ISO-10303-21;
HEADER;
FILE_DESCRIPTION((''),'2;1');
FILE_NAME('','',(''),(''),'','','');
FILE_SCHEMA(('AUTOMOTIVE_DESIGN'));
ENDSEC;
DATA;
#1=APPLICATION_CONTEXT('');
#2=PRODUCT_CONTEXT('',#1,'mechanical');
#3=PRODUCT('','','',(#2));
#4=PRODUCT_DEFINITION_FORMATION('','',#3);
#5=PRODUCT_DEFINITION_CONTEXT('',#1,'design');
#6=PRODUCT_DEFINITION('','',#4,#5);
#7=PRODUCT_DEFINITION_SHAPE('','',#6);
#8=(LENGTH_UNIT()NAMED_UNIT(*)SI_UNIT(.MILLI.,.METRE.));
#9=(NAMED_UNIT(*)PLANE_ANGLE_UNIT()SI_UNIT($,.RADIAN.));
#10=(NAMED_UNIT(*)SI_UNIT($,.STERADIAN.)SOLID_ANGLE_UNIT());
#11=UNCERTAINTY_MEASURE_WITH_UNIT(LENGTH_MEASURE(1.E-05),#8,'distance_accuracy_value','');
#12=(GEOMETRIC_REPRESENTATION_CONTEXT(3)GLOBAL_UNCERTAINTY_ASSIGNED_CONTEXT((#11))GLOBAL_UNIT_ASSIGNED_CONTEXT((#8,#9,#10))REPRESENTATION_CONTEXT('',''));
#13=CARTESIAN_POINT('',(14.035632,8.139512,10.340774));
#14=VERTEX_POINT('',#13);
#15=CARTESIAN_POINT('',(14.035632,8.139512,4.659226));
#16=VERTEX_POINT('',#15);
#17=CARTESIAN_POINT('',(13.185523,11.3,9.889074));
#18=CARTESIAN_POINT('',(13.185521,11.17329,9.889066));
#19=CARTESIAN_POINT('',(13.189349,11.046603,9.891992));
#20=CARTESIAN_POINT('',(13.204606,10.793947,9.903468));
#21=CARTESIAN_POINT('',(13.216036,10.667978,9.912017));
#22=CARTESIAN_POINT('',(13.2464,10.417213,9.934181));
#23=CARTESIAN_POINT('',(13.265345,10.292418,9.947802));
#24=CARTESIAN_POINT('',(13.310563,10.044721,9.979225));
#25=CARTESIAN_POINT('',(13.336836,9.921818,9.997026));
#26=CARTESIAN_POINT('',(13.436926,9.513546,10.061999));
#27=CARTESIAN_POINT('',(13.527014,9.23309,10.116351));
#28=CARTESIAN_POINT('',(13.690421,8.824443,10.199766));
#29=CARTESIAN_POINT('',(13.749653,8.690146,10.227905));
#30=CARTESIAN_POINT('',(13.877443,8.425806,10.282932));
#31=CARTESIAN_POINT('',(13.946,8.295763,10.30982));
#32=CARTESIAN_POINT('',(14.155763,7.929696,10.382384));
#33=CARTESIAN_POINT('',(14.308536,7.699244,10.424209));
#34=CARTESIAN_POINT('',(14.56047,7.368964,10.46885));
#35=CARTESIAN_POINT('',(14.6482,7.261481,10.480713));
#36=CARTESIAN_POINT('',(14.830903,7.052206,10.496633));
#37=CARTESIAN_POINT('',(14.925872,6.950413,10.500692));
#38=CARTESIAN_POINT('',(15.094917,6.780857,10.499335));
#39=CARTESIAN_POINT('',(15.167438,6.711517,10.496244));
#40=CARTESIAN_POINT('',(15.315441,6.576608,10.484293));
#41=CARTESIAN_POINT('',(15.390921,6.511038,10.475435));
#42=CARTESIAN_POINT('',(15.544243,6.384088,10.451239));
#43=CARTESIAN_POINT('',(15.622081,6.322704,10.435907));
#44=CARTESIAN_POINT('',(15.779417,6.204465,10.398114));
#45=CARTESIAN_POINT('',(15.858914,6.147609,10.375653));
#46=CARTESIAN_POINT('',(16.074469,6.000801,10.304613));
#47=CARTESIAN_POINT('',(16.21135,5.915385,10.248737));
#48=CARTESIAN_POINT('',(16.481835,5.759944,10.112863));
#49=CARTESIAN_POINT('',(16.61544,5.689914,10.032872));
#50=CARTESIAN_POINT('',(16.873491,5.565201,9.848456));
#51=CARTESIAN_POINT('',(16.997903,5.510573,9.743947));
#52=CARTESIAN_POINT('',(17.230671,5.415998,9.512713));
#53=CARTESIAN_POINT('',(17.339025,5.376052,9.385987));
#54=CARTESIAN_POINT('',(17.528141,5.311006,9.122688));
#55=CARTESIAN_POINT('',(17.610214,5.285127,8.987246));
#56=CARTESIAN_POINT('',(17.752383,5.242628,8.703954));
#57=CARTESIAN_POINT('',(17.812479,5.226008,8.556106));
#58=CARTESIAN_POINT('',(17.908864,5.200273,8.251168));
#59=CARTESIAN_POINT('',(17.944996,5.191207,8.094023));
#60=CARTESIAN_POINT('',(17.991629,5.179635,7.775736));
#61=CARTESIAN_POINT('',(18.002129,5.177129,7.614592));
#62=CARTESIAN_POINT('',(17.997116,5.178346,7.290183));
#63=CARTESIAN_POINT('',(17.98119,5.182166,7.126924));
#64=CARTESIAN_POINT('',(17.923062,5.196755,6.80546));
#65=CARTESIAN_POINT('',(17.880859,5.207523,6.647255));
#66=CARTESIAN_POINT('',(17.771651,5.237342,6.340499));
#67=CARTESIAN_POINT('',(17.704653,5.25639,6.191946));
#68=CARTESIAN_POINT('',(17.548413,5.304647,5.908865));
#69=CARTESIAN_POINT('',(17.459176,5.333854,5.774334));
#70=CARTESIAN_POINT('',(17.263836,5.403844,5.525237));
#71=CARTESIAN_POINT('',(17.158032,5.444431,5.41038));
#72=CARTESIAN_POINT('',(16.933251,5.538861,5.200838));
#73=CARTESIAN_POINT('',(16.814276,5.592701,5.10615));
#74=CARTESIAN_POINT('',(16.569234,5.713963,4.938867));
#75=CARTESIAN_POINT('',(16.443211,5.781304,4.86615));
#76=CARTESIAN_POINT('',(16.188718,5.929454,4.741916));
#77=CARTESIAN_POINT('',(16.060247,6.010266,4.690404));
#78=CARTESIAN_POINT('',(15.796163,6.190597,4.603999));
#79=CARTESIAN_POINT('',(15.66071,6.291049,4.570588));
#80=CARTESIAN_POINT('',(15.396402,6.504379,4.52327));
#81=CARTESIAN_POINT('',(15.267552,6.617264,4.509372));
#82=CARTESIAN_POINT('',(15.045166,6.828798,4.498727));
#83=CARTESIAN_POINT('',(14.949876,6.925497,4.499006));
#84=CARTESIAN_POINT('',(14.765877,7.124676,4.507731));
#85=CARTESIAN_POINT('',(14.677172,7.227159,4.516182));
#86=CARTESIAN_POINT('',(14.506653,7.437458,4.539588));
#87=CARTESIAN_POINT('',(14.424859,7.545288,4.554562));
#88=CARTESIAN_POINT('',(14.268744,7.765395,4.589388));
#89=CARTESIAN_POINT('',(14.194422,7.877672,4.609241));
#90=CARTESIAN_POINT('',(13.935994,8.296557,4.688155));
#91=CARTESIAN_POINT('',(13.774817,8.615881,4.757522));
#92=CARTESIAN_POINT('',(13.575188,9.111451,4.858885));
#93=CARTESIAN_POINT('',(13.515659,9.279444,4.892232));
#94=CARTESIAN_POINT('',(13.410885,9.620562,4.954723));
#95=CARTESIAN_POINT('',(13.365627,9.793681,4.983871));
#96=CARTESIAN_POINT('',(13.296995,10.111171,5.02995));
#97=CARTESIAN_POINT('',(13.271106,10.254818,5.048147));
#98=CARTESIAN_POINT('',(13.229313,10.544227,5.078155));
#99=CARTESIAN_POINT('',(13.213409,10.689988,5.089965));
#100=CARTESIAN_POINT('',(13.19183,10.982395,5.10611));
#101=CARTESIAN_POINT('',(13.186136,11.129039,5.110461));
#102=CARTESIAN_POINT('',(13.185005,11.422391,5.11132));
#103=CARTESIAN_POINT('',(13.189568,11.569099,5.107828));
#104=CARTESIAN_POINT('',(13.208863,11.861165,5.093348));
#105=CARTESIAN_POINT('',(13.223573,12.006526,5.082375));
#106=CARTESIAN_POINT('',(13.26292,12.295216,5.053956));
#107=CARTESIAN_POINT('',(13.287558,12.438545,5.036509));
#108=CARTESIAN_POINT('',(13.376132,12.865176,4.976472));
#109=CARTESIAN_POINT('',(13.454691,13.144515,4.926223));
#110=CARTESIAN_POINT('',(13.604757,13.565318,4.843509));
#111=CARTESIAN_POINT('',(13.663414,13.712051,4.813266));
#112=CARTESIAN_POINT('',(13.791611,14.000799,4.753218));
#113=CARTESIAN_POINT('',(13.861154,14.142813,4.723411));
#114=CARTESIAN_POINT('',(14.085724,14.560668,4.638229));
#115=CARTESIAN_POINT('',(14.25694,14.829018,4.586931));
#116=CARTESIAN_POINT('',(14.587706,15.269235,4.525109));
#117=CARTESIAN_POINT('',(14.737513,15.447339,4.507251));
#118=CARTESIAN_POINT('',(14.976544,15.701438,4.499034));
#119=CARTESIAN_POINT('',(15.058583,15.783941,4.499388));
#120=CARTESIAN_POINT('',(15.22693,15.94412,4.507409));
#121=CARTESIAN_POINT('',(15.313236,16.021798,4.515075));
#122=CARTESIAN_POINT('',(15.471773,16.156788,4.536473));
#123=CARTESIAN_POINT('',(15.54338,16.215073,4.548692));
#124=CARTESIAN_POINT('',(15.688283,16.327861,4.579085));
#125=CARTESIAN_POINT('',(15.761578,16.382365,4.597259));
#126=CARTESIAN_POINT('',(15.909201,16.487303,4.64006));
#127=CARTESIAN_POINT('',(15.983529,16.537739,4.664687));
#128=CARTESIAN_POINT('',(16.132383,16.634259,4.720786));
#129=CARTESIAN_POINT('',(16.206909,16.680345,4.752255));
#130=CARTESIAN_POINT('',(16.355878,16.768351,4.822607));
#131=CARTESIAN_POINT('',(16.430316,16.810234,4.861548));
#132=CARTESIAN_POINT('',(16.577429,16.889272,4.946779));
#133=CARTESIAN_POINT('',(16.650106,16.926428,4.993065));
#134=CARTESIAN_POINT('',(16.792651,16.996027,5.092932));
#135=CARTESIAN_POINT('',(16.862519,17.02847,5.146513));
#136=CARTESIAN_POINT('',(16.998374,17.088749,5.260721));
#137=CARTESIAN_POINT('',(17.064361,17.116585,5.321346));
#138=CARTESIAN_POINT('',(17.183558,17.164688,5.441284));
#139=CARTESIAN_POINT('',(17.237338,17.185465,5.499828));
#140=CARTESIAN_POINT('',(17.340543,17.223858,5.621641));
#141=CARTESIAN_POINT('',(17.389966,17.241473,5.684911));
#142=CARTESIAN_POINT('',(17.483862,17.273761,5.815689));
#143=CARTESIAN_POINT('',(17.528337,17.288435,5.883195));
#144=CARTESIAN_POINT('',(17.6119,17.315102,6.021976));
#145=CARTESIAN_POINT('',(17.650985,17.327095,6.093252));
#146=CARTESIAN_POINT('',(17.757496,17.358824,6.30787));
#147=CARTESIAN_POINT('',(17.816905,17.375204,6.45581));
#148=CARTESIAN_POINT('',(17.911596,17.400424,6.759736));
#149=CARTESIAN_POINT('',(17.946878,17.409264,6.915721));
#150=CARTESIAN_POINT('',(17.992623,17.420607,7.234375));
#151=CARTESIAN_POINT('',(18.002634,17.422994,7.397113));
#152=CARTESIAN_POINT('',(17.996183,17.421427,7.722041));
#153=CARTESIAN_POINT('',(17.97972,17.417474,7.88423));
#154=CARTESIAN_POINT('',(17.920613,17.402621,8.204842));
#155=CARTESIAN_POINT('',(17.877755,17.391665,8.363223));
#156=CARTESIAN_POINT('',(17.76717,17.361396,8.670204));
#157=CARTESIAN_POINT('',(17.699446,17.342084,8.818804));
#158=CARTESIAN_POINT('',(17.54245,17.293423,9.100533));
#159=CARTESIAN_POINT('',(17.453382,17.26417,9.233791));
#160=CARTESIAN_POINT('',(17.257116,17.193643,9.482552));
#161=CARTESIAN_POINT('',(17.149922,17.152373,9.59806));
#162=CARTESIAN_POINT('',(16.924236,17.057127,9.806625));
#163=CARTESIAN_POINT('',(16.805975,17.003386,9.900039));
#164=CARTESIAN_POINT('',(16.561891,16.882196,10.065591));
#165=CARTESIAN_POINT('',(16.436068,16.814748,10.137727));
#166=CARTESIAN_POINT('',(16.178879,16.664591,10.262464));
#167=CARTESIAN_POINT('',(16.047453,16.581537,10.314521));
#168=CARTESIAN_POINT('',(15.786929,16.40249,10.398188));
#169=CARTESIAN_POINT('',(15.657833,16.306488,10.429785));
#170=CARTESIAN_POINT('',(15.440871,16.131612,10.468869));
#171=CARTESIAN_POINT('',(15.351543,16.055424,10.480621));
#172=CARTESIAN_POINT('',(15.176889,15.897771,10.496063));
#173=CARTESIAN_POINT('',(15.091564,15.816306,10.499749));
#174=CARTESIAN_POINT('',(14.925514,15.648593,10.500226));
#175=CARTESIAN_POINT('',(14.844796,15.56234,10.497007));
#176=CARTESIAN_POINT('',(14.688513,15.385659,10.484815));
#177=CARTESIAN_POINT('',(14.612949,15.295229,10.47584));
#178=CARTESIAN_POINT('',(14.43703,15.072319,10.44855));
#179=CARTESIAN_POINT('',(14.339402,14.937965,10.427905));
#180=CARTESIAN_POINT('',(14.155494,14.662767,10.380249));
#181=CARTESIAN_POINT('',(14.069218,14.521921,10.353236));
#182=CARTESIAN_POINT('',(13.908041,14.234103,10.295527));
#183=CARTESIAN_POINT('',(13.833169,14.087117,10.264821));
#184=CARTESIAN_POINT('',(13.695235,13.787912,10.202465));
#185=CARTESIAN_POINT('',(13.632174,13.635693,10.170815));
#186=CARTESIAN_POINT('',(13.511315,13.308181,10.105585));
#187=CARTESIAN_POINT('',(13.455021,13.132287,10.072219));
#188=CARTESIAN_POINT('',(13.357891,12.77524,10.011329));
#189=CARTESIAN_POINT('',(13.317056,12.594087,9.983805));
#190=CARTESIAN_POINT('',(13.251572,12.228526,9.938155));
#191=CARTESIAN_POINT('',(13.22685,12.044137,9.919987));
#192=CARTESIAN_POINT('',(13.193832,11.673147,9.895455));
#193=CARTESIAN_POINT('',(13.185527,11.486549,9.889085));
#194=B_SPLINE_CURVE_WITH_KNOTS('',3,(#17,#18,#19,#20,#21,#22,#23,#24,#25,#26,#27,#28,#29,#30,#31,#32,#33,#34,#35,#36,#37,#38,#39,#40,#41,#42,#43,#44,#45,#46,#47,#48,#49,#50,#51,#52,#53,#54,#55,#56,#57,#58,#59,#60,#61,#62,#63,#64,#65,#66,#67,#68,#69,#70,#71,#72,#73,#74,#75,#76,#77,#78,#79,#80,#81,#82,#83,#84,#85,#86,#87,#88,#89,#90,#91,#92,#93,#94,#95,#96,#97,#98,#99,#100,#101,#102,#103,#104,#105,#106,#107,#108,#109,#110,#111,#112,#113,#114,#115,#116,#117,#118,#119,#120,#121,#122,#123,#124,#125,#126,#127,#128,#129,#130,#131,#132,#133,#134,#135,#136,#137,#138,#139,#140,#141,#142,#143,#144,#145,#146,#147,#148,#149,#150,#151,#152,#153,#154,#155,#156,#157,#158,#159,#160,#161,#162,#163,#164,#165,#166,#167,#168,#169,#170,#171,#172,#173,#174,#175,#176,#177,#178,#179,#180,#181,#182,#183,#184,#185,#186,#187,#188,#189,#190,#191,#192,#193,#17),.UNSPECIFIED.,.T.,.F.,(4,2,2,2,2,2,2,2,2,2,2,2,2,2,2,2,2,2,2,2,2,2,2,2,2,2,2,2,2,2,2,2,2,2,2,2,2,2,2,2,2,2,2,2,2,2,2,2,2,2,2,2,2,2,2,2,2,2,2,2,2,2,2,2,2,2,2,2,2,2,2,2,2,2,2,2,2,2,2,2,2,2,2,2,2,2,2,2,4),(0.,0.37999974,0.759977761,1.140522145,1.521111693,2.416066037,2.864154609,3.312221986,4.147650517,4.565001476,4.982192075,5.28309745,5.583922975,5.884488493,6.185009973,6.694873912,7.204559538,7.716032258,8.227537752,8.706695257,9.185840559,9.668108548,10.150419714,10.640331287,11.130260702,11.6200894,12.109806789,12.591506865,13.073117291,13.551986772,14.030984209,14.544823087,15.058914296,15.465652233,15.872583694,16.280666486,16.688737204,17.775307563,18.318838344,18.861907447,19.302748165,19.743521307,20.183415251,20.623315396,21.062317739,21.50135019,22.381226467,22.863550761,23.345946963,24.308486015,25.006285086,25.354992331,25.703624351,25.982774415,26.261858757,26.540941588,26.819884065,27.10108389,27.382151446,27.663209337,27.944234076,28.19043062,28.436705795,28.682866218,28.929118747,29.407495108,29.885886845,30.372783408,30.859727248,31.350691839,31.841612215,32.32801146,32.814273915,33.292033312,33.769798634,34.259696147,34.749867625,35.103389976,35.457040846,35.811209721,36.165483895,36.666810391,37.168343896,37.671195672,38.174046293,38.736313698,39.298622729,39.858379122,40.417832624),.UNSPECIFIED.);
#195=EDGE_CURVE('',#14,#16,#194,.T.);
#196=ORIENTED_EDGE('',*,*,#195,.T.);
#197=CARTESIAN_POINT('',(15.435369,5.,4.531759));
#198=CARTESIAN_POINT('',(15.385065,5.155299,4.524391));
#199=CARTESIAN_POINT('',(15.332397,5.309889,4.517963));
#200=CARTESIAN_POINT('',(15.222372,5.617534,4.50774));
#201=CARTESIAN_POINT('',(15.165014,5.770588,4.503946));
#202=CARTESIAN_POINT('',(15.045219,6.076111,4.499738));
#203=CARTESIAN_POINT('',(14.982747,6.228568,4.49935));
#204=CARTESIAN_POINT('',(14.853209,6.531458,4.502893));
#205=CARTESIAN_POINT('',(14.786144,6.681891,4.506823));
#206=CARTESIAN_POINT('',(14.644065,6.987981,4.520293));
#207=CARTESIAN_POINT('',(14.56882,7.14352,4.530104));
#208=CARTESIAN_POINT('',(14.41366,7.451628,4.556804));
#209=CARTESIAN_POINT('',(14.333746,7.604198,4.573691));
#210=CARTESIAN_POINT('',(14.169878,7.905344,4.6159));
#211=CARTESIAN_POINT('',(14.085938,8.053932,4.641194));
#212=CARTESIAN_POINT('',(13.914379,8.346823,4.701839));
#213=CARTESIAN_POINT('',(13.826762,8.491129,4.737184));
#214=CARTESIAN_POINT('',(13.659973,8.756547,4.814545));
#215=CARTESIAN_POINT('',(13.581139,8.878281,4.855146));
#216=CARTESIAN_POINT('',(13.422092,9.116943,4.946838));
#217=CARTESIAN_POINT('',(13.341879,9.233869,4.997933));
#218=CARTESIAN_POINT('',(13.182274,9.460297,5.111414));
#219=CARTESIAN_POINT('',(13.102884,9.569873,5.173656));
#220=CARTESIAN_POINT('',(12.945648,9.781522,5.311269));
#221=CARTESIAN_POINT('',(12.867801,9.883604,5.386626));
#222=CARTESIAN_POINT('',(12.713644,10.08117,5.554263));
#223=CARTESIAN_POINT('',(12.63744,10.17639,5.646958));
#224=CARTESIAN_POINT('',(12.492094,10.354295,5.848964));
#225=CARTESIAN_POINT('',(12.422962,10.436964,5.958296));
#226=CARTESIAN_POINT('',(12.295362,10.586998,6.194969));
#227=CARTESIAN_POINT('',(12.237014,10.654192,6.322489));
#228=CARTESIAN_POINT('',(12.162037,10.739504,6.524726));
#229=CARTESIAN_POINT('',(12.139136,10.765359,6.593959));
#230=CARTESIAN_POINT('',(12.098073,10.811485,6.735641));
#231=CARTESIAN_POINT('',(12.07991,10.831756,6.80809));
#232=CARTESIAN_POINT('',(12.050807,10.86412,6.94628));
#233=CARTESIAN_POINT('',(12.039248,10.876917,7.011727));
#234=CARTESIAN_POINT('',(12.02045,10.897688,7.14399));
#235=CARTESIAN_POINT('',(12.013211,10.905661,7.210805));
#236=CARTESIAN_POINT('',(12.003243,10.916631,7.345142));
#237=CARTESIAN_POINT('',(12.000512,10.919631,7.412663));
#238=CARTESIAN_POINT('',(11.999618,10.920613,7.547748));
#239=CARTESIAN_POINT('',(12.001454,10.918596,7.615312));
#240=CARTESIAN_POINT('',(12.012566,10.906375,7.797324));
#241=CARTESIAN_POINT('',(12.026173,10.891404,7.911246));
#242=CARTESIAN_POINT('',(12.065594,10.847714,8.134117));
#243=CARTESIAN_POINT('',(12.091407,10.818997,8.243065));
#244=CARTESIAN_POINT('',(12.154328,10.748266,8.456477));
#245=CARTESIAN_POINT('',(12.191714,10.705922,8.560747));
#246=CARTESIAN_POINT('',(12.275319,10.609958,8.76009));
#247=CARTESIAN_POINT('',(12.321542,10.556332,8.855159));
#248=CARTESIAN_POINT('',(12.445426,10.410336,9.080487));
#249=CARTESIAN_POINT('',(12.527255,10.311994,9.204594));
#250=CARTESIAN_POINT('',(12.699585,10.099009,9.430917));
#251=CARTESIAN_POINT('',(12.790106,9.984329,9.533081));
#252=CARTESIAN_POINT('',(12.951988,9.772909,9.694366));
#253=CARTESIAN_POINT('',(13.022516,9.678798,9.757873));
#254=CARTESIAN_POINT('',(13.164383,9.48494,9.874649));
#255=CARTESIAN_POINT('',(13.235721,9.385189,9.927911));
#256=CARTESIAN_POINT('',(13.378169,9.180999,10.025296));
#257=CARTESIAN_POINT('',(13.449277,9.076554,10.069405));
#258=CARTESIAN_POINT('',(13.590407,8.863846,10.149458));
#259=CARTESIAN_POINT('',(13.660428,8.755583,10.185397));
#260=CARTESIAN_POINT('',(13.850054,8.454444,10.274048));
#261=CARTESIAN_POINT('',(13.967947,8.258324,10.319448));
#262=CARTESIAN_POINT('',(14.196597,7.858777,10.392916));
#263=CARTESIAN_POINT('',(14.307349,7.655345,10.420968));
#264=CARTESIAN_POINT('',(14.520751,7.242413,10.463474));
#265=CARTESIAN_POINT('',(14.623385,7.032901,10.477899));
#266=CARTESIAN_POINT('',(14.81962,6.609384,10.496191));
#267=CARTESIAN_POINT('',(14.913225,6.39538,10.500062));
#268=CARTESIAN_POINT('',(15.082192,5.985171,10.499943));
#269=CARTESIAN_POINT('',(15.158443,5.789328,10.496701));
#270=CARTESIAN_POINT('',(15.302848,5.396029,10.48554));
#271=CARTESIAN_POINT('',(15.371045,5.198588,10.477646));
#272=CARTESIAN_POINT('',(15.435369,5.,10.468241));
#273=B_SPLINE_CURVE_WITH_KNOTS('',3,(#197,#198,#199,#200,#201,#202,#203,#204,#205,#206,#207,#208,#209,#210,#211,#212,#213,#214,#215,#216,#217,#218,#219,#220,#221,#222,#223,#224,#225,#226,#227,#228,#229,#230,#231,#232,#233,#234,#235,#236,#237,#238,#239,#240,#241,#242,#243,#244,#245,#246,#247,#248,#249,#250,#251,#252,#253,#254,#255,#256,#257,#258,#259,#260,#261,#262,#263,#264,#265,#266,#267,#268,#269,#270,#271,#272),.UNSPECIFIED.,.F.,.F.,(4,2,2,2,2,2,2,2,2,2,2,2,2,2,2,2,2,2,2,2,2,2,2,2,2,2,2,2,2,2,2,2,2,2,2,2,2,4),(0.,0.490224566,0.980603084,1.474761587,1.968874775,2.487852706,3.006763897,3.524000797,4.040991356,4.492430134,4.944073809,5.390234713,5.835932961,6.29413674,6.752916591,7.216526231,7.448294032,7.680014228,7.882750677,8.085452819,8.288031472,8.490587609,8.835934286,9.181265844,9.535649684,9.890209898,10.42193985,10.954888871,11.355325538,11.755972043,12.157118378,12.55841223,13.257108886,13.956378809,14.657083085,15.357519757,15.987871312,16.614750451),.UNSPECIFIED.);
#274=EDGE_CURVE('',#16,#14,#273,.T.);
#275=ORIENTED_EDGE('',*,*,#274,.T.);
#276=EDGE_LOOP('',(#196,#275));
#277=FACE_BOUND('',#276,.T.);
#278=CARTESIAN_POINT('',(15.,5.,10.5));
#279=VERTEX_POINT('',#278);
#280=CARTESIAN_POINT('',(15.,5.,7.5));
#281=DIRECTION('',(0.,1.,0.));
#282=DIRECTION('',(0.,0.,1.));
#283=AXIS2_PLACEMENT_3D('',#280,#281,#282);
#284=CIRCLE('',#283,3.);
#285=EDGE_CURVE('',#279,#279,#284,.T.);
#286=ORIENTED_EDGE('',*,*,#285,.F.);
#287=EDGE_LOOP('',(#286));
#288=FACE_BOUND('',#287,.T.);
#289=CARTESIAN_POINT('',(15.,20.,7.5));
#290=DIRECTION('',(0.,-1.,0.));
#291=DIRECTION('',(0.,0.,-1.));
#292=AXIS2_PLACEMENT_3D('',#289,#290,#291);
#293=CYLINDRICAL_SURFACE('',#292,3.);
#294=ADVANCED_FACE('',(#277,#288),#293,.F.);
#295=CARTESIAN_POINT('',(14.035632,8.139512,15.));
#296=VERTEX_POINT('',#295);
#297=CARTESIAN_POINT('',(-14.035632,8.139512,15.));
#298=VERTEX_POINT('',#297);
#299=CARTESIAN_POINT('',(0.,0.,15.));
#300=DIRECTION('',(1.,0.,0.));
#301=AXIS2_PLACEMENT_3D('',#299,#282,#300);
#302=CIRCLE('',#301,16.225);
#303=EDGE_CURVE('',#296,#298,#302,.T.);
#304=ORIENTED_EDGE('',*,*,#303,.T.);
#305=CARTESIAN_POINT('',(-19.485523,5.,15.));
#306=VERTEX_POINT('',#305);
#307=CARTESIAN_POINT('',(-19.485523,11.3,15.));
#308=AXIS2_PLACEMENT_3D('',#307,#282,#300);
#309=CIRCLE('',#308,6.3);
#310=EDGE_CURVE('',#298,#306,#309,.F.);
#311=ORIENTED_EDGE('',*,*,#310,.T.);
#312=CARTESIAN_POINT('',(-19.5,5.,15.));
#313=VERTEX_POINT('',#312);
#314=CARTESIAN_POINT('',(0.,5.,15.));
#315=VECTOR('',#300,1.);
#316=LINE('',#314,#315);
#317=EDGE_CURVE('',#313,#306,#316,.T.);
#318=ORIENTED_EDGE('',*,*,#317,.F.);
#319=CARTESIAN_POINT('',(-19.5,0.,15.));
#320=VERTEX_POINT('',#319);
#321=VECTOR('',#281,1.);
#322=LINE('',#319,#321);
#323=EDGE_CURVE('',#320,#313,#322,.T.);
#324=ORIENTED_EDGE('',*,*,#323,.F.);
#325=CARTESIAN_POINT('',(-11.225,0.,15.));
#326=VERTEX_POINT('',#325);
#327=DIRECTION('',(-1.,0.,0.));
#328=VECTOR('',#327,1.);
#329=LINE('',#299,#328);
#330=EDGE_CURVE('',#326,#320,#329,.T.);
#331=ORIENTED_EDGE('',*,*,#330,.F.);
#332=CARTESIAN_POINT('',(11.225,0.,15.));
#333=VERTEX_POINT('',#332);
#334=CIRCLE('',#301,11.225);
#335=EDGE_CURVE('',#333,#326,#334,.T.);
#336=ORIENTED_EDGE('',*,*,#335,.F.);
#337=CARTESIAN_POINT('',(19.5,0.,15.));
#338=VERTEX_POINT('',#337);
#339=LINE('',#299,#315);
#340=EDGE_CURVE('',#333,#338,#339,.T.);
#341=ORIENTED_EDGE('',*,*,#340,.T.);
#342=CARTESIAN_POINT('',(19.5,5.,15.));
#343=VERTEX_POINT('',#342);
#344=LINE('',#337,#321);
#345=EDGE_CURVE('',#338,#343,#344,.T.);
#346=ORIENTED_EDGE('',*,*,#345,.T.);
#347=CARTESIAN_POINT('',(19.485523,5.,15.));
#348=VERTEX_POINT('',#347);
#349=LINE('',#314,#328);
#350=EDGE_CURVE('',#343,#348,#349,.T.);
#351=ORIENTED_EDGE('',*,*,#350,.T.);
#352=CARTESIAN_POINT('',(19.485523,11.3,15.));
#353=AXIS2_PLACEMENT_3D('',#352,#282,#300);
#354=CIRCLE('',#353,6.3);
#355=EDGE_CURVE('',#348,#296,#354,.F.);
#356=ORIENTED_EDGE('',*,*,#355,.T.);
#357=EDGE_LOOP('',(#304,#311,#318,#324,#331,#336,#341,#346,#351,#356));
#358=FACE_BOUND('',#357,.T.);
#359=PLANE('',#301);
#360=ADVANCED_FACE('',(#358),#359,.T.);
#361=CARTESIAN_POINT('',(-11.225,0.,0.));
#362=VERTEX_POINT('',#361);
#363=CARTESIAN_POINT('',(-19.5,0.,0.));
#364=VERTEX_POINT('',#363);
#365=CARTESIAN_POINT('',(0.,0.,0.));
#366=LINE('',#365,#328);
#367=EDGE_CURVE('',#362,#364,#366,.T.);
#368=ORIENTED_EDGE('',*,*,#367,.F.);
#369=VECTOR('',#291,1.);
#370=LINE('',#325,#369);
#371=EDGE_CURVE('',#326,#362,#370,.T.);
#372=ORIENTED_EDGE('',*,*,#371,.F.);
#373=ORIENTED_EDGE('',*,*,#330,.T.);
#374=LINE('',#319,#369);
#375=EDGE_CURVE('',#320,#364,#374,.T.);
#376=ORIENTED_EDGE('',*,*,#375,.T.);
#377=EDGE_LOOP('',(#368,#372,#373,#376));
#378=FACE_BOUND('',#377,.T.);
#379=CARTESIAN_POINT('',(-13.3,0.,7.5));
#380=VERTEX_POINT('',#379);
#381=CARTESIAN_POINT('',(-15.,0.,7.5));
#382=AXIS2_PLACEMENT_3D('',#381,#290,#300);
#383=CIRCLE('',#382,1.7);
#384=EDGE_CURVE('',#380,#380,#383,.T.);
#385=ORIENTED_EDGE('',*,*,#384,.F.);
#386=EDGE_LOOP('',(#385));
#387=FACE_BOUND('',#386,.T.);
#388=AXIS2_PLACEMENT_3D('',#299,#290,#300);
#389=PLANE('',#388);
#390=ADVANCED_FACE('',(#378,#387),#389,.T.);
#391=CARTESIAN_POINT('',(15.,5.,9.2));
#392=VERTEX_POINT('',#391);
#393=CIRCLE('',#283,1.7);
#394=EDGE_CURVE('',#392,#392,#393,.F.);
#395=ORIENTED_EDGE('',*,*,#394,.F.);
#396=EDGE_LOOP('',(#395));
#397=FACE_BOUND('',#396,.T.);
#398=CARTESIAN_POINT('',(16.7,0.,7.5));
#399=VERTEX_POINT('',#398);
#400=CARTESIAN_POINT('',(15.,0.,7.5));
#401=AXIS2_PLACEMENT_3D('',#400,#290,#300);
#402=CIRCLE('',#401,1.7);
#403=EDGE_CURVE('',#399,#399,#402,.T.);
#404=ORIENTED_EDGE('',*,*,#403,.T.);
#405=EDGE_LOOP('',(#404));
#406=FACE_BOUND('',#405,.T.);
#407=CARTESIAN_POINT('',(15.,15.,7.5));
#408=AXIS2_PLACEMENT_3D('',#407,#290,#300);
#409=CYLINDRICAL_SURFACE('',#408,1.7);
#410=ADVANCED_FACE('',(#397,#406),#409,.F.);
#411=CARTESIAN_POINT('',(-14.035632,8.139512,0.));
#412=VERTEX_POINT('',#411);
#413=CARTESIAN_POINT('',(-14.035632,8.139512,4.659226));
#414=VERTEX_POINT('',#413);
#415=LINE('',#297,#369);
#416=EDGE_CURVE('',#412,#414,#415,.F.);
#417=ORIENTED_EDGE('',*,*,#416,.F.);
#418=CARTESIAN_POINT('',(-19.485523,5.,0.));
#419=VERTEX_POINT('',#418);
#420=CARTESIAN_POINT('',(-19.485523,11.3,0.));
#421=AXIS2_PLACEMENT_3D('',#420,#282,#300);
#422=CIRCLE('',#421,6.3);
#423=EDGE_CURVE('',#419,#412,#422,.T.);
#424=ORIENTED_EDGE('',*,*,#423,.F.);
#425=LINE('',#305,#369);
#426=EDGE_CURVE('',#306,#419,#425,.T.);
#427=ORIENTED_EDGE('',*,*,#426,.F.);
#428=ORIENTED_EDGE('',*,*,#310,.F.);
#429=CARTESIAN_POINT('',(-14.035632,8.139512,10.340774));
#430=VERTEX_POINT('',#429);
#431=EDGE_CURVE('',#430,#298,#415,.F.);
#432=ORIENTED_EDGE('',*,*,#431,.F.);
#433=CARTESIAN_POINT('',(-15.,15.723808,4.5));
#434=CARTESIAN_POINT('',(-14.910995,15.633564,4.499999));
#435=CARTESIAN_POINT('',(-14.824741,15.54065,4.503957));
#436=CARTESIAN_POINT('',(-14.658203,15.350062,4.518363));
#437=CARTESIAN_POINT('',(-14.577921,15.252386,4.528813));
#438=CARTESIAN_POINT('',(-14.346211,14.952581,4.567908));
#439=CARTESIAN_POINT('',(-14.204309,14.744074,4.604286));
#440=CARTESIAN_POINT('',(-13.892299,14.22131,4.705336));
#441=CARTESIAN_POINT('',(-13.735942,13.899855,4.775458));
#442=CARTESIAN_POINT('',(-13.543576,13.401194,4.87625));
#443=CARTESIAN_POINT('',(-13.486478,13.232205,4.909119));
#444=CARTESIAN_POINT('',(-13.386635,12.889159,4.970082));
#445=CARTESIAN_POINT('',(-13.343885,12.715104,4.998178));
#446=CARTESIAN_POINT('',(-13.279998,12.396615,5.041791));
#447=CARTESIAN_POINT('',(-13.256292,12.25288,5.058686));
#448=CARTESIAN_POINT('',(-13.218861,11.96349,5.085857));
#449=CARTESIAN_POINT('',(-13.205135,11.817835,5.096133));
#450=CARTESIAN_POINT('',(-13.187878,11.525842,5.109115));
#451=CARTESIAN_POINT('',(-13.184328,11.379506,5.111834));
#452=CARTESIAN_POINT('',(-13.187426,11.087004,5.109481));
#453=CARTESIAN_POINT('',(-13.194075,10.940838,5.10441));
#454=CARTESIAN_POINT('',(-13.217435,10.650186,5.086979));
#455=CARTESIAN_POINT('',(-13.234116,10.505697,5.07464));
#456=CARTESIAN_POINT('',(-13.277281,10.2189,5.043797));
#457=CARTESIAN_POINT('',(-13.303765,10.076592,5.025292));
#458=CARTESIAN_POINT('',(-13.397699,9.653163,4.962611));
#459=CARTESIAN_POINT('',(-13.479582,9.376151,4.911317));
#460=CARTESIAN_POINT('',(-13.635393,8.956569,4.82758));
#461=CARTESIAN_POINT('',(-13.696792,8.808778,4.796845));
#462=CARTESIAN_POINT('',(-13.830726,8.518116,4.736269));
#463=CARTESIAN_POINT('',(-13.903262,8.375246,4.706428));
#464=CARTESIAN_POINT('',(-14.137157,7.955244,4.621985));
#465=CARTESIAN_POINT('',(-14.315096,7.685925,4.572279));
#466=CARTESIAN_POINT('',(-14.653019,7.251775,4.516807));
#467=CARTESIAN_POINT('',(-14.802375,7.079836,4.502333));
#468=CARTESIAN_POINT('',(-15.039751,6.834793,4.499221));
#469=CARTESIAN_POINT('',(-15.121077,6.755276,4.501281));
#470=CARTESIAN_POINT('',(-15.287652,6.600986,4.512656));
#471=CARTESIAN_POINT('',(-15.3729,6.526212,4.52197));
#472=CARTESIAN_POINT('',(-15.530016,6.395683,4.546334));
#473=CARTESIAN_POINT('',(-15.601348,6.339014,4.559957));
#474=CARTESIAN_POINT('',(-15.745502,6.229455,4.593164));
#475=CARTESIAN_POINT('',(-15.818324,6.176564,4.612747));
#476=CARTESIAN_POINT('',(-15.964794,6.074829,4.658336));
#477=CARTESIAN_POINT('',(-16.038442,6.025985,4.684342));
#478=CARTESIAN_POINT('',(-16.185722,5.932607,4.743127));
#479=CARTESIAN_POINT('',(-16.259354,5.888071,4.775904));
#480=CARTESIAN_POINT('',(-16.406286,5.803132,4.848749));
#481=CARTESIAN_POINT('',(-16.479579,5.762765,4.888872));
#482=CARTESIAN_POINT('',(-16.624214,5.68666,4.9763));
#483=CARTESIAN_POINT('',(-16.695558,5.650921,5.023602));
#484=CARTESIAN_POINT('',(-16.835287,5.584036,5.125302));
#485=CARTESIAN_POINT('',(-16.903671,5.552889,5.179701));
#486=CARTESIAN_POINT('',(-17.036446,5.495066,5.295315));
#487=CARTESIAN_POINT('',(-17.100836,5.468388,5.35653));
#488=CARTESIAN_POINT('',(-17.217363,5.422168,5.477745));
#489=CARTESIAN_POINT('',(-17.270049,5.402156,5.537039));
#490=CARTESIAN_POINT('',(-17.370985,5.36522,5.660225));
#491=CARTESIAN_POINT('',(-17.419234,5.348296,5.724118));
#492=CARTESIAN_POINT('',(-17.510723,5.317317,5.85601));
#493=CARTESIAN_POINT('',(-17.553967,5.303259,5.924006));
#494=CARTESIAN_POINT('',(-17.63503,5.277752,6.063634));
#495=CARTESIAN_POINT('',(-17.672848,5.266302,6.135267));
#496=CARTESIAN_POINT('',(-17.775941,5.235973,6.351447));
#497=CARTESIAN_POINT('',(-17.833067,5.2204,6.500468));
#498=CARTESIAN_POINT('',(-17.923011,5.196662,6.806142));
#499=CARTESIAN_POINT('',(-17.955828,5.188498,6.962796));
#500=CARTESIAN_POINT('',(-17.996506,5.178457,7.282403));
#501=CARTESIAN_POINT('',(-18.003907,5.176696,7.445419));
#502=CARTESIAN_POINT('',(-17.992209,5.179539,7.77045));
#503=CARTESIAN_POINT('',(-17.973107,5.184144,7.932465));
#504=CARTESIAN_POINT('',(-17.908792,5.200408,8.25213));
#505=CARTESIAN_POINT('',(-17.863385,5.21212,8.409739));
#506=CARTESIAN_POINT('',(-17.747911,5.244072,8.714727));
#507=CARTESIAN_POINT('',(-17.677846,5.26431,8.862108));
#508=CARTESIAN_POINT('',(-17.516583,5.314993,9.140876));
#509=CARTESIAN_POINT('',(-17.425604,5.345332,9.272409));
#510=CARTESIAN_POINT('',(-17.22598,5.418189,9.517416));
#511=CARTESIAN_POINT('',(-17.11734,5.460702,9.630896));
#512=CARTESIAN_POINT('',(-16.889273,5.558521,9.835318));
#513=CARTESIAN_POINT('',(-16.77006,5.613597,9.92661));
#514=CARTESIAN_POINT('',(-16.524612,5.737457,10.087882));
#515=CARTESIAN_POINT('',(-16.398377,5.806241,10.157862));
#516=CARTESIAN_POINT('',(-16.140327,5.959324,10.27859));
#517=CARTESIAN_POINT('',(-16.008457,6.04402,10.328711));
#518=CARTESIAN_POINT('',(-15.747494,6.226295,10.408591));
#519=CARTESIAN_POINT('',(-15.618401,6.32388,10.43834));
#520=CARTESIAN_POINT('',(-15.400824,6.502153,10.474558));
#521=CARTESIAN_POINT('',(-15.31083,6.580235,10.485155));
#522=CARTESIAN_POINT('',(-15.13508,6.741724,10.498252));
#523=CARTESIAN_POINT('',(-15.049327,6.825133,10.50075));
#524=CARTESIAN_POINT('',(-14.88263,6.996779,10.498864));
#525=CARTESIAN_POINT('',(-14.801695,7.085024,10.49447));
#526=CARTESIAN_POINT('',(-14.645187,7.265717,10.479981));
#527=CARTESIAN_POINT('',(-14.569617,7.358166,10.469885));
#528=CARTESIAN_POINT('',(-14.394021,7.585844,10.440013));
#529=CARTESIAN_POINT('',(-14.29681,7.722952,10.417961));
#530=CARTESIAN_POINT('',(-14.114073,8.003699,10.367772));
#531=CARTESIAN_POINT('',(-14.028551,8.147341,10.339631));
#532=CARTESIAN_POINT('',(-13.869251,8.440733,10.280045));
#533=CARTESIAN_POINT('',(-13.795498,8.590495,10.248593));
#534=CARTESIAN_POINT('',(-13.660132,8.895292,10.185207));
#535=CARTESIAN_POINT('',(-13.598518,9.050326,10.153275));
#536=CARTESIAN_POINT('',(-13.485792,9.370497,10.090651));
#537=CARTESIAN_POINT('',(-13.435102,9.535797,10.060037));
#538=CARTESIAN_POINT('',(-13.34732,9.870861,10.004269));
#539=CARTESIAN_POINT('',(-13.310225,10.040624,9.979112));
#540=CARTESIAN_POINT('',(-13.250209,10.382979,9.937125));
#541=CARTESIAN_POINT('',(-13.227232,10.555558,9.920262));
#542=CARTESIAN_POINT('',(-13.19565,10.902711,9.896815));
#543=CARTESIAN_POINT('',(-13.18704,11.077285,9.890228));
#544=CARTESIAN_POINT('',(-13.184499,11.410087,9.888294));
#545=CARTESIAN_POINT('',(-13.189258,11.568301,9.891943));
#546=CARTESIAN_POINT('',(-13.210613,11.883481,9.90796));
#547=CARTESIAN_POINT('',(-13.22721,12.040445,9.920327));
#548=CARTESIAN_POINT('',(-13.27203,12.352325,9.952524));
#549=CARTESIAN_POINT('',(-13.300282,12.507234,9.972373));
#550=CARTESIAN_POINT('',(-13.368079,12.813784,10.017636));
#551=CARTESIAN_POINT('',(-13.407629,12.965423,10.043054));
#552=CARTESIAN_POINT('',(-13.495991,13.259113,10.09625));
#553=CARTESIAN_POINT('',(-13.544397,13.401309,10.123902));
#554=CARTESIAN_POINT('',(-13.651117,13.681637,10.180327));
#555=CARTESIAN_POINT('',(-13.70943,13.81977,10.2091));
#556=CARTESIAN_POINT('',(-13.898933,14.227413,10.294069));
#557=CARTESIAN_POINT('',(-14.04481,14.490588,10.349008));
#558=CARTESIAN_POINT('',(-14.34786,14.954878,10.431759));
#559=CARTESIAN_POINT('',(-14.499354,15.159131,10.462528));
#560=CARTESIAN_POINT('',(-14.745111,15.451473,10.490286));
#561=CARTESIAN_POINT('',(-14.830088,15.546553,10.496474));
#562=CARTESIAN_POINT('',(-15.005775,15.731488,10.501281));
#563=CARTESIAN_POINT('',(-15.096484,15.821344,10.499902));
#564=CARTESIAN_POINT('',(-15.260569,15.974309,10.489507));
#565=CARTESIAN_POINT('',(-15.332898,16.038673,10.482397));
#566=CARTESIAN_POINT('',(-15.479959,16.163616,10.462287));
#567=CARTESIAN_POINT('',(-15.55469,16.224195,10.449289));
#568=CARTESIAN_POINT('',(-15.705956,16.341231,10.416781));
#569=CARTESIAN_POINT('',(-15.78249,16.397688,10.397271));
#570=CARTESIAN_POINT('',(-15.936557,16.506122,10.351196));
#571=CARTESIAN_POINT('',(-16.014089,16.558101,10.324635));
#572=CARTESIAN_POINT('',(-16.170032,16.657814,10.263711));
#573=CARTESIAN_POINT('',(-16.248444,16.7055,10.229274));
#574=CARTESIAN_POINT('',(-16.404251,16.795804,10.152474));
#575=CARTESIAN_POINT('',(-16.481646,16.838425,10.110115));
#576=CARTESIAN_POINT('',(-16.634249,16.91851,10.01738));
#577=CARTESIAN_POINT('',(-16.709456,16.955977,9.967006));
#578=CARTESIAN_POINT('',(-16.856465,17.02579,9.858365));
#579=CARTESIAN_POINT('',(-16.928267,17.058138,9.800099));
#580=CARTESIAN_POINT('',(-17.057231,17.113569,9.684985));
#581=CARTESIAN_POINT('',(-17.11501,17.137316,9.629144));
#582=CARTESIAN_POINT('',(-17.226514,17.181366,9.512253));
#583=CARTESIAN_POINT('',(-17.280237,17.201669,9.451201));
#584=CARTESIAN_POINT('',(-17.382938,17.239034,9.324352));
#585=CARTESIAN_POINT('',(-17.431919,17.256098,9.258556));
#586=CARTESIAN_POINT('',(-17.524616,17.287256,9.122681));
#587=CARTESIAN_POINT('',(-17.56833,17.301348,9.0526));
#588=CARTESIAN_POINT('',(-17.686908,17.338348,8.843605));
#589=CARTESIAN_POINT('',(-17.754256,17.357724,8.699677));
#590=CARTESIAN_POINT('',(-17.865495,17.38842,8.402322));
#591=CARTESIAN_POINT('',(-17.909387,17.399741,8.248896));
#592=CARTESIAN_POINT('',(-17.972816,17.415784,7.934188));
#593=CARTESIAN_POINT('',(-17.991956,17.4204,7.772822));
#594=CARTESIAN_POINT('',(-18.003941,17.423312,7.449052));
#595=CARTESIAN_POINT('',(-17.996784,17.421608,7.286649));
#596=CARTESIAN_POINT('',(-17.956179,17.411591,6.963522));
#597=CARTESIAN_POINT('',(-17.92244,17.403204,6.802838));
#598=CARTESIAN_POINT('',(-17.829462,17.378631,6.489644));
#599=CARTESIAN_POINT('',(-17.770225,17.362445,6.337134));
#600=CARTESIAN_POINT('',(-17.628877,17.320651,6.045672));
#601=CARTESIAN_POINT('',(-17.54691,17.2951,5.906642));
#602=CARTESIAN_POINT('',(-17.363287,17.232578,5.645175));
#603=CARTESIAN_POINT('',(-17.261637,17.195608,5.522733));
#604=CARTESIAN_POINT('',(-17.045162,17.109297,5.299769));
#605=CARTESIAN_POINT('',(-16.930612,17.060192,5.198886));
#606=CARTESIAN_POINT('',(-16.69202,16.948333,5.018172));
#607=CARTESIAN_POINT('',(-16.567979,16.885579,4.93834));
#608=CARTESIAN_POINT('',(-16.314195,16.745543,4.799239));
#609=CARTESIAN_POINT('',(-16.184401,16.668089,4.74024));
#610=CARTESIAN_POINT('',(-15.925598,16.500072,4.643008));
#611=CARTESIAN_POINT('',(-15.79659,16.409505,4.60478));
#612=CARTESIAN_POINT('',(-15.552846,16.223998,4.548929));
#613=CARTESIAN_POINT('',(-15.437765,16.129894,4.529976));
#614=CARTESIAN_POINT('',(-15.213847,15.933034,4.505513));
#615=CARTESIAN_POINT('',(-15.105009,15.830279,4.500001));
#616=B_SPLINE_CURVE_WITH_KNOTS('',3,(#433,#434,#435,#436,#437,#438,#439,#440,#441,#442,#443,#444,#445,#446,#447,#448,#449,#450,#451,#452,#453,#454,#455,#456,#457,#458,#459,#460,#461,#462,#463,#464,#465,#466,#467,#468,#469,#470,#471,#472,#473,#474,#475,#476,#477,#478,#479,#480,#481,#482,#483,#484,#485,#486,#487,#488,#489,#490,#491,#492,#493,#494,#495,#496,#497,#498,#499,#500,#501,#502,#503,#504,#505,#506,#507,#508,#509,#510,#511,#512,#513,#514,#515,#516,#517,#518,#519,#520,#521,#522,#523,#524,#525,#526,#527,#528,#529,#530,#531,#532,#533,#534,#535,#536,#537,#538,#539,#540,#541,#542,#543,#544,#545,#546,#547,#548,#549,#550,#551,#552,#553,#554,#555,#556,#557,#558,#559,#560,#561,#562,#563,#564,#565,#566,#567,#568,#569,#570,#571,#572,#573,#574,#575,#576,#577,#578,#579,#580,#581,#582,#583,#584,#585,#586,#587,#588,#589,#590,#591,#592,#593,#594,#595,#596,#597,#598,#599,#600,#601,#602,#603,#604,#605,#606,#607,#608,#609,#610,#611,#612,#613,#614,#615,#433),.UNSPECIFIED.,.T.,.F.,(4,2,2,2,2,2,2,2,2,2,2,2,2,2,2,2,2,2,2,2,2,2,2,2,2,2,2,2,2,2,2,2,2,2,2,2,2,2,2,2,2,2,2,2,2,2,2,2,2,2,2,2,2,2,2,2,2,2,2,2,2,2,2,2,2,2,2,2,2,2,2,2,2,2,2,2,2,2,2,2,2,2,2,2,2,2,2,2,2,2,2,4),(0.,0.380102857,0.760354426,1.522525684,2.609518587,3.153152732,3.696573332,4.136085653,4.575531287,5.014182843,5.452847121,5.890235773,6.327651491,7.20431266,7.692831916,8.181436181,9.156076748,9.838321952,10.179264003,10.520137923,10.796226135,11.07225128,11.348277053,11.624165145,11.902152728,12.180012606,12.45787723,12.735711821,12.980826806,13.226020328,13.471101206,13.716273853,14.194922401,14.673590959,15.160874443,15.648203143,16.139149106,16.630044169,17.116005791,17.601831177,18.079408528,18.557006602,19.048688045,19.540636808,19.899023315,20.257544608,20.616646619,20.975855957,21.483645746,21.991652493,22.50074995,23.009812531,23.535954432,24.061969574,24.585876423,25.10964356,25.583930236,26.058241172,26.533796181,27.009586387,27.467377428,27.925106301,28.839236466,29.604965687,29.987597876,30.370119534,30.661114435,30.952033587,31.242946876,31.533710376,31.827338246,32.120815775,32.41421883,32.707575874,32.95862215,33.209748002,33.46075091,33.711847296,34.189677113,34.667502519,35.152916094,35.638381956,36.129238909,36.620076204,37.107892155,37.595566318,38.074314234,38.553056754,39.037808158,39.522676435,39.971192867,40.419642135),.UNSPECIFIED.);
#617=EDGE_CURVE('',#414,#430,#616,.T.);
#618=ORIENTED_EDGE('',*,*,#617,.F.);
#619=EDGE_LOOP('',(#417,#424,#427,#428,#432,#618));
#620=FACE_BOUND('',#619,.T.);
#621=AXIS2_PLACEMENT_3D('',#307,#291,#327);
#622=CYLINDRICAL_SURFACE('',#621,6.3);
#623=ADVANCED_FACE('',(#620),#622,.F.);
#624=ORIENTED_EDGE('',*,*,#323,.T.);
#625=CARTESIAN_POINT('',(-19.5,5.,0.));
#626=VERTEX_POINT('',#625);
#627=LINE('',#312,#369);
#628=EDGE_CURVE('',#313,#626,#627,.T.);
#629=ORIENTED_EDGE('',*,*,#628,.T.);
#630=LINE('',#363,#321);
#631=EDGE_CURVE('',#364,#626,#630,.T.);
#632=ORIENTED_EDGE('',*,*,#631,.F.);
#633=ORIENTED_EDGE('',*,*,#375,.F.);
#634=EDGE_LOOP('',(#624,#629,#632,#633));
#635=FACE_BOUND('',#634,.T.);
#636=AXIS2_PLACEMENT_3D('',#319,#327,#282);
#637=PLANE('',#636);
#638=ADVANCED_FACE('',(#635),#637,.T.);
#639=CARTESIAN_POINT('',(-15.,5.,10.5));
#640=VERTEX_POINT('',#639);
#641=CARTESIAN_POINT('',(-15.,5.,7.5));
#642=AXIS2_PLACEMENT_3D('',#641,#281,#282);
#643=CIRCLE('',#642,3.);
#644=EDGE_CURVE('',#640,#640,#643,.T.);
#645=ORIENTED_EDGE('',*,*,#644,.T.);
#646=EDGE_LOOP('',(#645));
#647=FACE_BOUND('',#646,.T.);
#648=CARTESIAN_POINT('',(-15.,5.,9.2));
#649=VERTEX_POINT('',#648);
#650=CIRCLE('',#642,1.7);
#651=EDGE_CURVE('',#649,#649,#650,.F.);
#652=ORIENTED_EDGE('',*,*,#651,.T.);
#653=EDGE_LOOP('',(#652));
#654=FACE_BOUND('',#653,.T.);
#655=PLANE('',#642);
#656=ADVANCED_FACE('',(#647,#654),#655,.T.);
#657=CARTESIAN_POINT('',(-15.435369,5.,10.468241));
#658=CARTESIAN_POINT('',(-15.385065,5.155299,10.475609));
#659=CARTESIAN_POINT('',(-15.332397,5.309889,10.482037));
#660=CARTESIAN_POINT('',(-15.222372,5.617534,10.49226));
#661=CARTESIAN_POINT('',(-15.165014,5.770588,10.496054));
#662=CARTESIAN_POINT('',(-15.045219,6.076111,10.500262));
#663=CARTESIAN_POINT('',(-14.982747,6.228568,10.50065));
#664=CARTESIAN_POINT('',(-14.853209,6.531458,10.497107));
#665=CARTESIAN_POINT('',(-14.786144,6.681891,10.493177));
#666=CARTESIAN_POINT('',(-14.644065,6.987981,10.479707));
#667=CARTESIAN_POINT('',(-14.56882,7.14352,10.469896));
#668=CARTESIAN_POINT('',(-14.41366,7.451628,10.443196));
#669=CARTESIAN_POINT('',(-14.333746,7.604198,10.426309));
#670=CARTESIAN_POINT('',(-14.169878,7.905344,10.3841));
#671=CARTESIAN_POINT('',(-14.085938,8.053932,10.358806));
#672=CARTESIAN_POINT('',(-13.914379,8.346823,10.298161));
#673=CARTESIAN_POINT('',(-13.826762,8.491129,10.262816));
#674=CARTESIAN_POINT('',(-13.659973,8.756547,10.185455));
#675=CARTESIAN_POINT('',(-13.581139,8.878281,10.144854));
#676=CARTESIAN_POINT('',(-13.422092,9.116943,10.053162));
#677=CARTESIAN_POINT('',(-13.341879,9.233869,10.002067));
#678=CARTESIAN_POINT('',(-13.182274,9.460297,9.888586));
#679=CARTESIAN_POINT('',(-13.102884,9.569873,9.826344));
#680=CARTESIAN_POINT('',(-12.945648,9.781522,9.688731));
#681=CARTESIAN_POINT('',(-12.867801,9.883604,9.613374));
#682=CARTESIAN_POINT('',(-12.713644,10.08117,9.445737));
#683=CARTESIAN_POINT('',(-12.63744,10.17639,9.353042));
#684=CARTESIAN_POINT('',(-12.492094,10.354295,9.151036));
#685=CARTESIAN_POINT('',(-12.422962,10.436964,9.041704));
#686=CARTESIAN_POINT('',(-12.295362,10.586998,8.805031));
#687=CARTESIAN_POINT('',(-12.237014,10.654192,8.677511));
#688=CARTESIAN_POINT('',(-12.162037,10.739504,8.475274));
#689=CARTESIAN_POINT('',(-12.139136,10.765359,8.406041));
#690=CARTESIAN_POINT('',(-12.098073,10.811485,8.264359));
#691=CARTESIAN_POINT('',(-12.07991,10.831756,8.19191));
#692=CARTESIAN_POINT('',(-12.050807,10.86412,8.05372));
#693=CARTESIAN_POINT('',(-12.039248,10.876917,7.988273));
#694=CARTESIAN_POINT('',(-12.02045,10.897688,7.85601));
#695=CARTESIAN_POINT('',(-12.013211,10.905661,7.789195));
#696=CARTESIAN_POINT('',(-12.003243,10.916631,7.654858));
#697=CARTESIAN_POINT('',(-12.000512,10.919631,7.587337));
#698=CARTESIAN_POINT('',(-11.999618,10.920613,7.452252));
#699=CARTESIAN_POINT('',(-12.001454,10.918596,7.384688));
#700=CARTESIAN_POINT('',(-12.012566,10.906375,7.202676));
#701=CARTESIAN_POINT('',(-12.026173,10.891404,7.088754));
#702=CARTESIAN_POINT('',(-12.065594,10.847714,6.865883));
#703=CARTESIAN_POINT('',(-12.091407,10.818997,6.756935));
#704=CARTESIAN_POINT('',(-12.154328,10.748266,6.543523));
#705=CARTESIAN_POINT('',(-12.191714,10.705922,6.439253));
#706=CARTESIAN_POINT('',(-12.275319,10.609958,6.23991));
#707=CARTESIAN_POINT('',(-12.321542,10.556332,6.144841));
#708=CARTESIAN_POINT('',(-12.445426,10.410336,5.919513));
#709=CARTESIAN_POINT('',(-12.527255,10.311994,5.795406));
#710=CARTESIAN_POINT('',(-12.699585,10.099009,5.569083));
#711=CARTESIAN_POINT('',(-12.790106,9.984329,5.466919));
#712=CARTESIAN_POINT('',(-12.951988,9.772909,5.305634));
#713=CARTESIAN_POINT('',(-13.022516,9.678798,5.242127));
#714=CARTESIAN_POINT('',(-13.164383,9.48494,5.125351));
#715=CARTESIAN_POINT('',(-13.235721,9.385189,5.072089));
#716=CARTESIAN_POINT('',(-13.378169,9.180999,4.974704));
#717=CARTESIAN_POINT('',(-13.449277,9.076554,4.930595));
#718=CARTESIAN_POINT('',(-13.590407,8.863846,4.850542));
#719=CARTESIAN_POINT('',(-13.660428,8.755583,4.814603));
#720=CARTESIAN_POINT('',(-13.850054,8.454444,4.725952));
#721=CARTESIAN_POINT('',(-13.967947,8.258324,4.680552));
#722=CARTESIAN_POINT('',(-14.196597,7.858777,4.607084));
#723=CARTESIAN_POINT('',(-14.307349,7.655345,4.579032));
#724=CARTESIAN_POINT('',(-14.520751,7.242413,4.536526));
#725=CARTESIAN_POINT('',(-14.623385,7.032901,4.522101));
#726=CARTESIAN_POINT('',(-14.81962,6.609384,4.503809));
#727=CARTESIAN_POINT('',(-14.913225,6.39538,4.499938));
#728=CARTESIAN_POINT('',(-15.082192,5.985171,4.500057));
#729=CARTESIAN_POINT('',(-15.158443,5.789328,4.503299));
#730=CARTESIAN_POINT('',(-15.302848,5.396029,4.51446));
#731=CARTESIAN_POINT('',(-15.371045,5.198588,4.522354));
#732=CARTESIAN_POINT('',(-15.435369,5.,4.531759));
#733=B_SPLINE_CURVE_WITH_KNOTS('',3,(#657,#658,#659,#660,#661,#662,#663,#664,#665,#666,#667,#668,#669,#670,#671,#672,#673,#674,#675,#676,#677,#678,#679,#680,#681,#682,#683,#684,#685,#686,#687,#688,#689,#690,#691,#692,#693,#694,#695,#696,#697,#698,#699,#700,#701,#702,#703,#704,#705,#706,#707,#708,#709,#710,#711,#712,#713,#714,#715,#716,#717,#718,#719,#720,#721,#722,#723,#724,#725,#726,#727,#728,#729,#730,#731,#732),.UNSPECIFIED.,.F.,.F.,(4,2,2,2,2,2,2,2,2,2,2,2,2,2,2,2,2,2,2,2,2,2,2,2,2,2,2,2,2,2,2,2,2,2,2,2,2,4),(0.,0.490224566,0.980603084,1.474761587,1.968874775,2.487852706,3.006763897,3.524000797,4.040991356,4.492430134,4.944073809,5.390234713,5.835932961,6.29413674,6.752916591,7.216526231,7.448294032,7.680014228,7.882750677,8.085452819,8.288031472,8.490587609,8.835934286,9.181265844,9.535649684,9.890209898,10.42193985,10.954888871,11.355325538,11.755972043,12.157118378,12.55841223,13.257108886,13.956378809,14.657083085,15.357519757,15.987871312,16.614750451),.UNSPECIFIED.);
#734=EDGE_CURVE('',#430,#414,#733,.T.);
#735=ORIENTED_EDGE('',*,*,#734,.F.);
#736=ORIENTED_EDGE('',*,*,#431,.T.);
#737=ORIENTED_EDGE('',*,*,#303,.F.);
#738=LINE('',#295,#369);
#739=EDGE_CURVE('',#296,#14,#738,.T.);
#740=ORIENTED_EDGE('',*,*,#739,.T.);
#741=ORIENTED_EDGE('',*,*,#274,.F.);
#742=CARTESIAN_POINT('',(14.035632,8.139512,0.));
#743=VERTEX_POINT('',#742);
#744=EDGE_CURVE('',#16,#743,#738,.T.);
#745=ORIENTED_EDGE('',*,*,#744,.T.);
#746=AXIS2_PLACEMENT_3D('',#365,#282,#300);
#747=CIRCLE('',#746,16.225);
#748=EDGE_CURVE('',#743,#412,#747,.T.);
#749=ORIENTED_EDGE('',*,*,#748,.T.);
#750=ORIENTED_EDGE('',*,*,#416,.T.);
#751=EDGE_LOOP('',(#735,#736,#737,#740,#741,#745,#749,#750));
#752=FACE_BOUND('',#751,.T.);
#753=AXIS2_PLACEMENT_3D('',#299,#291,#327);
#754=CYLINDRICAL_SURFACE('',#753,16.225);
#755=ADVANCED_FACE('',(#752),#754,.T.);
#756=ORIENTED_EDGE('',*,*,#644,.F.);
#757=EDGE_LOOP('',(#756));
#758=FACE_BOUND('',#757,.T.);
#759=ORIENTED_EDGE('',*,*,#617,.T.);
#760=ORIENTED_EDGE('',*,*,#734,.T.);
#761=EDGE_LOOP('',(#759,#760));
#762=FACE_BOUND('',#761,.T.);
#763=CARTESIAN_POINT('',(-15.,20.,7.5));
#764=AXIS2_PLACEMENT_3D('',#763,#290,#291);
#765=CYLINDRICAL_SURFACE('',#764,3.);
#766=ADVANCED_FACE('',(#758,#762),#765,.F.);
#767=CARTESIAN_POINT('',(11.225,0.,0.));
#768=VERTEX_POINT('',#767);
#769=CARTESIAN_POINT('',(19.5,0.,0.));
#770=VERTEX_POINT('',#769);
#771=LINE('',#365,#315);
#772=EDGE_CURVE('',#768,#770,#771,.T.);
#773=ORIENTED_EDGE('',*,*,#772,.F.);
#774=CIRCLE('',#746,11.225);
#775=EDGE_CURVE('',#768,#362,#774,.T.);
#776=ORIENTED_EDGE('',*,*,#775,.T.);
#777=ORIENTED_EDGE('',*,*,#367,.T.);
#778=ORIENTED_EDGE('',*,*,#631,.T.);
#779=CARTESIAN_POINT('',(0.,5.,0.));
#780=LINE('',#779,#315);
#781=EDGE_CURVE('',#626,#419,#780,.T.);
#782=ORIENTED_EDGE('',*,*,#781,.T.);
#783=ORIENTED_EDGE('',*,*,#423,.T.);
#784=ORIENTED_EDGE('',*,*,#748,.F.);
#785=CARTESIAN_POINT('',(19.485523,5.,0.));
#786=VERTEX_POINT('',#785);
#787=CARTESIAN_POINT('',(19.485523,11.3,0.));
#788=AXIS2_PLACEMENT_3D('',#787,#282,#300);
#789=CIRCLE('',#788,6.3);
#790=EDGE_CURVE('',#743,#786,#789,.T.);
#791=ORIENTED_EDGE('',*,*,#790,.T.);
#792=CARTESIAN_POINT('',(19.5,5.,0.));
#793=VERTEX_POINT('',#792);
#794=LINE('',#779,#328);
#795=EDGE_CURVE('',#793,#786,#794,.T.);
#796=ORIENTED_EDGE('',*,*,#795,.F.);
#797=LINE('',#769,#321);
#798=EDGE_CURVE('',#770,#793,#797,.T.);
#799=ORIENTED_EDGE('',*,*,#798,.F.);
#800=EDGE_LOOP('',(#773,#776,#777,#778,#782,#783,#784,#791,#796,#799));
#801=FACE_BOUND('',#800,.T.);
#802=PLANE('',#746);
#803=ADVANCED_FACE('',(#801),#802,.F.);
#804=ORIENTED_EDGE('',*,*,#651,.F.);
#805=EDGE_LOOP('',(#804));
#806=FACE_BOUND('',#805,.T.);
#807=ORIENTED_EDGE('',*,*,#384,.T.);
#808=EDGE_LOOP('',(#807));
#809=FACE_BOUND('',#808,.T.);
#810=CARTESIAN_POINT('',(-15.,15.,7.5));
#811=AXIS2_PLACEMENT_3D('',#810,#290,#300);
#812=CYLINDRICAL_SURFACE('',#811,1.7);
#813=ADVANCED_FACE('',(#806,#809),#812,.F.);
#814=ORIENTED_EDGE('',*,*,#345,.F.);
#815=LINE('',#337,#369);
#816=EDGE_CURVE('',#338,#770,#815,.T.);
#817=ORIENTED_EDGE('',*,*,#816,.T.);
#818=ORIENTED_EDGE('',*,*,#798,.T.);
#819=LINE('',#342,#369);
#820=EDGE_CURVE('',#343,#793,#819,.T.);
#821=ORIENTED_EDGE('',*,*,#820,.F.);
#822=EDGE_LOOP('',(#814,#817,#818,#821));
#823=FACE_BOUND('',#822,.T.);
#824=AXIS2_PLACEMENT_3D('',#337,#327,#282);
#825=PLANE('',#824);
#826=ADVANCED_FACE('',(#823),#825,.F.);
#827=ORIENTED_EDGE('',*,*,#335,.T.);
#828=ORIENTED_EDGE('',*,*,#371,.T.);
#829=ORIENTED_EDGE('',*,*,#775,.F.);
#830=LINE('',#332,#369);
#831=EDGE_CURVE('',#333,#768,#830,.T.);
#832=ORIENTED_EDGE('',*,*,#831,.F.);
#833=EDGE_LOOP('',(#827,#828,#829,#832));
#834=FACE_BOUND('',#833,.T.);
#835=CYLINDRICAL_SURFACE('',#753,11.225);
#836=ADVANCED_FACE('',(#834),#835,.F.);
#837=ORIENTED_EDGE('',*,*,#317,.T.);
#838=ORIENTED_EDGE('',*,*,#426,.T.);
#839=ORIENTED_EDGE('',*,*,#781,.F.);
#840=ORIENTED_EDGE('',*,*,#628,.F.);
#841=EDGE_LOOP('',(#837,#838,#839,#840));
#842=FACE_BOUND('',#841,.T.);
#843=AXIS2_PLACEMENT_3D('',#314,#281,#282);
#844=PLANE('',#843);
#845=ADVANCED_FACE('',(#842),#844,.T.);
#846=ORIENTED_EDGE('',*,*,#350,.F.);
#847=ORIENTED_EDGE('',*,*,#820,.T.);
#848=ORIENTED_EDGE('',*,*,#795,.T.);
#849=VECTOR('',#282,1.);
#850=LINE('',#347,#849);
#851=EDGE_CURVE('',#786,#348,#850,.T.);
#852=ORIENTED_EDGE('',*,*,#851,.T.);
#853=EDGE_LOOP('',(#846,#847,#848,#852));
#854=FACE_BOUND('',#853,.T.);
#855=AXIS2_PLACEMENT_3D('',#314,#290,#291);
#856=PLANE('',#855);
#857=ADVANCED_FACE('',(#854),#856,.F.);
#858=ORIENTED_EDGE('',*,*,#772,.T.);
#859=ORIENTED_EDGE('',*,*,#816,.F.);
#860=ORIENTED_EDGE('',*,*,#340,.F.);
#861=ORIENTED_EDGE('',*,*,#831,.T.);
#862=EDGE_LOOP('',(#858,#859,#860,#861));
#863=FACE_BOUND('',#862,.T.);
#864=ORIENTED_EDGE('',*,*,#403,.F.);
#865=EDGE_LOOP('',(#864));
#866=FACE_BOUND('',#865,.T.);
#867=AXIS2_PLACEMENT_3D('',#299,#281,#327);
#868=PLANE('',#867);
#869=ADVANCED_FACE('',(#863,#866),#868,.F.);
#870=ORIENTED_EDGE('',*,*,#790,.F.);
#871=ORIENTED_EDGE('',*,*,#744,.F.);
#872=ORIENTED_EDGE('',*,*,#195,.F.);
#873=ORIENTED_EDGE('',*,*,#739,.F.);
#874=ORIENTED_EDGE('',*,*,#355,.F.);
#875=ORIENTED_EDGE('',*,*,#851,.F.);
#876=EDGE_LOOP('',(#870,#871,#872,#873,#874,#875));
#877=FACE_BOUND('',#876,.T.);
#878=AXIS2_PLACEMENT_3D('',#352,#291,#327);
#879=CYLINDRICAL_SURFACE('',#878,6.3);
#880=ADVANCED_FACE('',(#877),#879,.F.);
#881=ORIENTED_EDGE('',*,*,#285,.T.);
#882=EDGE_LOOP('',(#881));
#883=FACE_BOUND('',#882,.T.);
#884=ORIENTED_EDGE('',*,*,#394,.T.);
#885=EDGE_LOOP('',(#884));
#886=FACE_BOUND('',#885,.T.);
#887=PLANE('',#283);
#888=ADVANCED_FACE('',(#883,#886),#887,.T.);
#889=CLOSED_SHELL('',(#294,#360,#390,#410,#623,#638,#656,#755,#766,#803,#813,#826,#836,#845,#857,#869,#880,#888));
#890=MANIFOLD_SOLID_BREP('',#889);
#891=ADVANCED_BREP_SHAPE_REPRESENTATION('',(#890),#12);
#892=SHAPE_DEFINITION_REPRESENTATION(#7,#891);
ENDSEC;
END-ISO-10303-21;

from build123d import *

# Parameters (mm, degrees)
Y_KSEKLIK_EKSTR_ZYON1_DEPTH = 15
IZIM2_R                     = 1.7
KES_EKSTR_ZYON2_DEPTH       = 15
RADYUS3_R                   = 6.3
IZIM3_R                     = 3
KES_EKSTR_ZYON3_DEPTH       = 15


with BuildPart() as part:
    # Çizim1 → Yükseklik-Ekstrüzyon1 (new body)
    with BuildSketch(Plane.XY):
        with BuildLine():
            Line((-19.5, 0), (-11.225, 0))
            ThreePointArc((-11.225, 0), (0, 11.225), (11.225, 0))
            Line((11.225, 0), (19.5, 0))
            Line((19.5, 0), (19.5, 5))
            Line((19.5, 5), (15.435369286, 5))
            ThreePointArc((15.435369286, 5), (0, 16.225), (-15.435369286, 5))
            Line((-15.435369286, 5), (-19.5, 5))
            Line((-19.5, 5), (-19.5, 0))
        make_face()
    extrude(amount=Y_KSEKLIK_EKSTR_ZYON1_DEPTH)

    # Çizim2 → Kes-Ekstrüzyon2 (cut)
    with BuildSketch(Plane.XZ):
        with Locations((-15, 7.5)):
            Circle(IZIM2_R)
        with Locations((15, 7.5)):
            Circle(IZIM2_R)
    extrude(amount=-KES_EKSTR_ZYON2_DEPTH, mode=Mode.SUBTRACT)

    # Radyus3
    # the kernel refuses this fillet: 6.3 mm, written as the material it adds along each edge
    with BuildSketch(Plane(origin=(-15.435369286, 5, -0.982079778), x_dir=(-1, 0, 0), z_dir=(0, 0, 1))) as radyus3_piece_1_section:
        with BuildLine():
            CenterArc((4.050154186, -6.3), RADYUS3_R, 90, 59.889795344)
            ThreePointArc((-1.399736951, -3.139511654), (-0.61649222, -1.60692875), (0, 0))
            Line((0, 0), (4.050154186, 0))
        make_face()
    radyus3_piece_1 = extrude(amount=15.982079778, mode=Mode.PRIVATE)
    radyus3_piece_1 = split(radyus3_piece_1, bisect_by=Plane(origin=(-18.387347424, 5.060237856, 0), z_dir=(0, 0, 1)), keep=Keep.TOP, mode=Mode.PRIVATE)
    radyus3_piece_1 = radyus3_piece_1 - Plane(origin=(-15, 5.060237856, 7.5), x_dir=(1, 0, 0), z_dir=(0, -1, 0)) * Cylinder(1.7, 49, mode=Mode.PRIVATE)
    add(radyus3_piece_1)
    with BuildSketch(Plane(origin=(15.435369286, 5, -0.982079778), x_dir=(-0.4072067026202576, 0.9133360287107571, 0), z_dir=(0, 0, 1))) as radyus3_piece_2_section:
        with BuildLine():
            CenterArc((4.10476705, -6.264553967), RADYUS3_R, 96.080720065, 59.889795344)
            Line((-1.649249931, -3.69915174), (0, 0))
            ThreePointArc((0, 0), (1.718705687, -0.091287601), (3.437411374, 0))
        make_face()
    radyus3_piece_2 = extrude(amount=15.982079778, mode=Mode.PRIVATE)
    radyus3_piece_2 = split(radyus3_piece_2, bisect_by=Plane(origin=(14.638658108, 7.219740405, 0), z_dir=(0, 0, 1)), keep=Keep.TOP, mode=Mode.PRIVATE)
    radyus3_piece_2 = radyus3_piece_2 - Plane(origin=(15, 7.219740405, 7.5), x_dir=(1, 0, 0), z_dir=(0, -1, 0)) * Cylinder(1.7, 47, mode=Mode.PRIVATE)
    add(radyus3_piece_2)

    # Çizim3 → Kes-Ekstrüzyon3 (cut)
    with BuildSketch(Plane(origin=(0, 5, 0), x_dir=(1, 0, 0), z_dir=(0, 1, 0))):
        with Locations(Location((-15, -7.5, 0), (0, 0, 71.249080341))):
            Circle(IZIM3_R)
        with Locations(Location((15, -7.5, 0), (0, 0, 108.750992195))):
            Circle(IZIM3_R)
    extrude(amount=KES_EKSTR_ZYON3_DEPTH, mode=Mode.SUBTRACT)


solid = part.part
